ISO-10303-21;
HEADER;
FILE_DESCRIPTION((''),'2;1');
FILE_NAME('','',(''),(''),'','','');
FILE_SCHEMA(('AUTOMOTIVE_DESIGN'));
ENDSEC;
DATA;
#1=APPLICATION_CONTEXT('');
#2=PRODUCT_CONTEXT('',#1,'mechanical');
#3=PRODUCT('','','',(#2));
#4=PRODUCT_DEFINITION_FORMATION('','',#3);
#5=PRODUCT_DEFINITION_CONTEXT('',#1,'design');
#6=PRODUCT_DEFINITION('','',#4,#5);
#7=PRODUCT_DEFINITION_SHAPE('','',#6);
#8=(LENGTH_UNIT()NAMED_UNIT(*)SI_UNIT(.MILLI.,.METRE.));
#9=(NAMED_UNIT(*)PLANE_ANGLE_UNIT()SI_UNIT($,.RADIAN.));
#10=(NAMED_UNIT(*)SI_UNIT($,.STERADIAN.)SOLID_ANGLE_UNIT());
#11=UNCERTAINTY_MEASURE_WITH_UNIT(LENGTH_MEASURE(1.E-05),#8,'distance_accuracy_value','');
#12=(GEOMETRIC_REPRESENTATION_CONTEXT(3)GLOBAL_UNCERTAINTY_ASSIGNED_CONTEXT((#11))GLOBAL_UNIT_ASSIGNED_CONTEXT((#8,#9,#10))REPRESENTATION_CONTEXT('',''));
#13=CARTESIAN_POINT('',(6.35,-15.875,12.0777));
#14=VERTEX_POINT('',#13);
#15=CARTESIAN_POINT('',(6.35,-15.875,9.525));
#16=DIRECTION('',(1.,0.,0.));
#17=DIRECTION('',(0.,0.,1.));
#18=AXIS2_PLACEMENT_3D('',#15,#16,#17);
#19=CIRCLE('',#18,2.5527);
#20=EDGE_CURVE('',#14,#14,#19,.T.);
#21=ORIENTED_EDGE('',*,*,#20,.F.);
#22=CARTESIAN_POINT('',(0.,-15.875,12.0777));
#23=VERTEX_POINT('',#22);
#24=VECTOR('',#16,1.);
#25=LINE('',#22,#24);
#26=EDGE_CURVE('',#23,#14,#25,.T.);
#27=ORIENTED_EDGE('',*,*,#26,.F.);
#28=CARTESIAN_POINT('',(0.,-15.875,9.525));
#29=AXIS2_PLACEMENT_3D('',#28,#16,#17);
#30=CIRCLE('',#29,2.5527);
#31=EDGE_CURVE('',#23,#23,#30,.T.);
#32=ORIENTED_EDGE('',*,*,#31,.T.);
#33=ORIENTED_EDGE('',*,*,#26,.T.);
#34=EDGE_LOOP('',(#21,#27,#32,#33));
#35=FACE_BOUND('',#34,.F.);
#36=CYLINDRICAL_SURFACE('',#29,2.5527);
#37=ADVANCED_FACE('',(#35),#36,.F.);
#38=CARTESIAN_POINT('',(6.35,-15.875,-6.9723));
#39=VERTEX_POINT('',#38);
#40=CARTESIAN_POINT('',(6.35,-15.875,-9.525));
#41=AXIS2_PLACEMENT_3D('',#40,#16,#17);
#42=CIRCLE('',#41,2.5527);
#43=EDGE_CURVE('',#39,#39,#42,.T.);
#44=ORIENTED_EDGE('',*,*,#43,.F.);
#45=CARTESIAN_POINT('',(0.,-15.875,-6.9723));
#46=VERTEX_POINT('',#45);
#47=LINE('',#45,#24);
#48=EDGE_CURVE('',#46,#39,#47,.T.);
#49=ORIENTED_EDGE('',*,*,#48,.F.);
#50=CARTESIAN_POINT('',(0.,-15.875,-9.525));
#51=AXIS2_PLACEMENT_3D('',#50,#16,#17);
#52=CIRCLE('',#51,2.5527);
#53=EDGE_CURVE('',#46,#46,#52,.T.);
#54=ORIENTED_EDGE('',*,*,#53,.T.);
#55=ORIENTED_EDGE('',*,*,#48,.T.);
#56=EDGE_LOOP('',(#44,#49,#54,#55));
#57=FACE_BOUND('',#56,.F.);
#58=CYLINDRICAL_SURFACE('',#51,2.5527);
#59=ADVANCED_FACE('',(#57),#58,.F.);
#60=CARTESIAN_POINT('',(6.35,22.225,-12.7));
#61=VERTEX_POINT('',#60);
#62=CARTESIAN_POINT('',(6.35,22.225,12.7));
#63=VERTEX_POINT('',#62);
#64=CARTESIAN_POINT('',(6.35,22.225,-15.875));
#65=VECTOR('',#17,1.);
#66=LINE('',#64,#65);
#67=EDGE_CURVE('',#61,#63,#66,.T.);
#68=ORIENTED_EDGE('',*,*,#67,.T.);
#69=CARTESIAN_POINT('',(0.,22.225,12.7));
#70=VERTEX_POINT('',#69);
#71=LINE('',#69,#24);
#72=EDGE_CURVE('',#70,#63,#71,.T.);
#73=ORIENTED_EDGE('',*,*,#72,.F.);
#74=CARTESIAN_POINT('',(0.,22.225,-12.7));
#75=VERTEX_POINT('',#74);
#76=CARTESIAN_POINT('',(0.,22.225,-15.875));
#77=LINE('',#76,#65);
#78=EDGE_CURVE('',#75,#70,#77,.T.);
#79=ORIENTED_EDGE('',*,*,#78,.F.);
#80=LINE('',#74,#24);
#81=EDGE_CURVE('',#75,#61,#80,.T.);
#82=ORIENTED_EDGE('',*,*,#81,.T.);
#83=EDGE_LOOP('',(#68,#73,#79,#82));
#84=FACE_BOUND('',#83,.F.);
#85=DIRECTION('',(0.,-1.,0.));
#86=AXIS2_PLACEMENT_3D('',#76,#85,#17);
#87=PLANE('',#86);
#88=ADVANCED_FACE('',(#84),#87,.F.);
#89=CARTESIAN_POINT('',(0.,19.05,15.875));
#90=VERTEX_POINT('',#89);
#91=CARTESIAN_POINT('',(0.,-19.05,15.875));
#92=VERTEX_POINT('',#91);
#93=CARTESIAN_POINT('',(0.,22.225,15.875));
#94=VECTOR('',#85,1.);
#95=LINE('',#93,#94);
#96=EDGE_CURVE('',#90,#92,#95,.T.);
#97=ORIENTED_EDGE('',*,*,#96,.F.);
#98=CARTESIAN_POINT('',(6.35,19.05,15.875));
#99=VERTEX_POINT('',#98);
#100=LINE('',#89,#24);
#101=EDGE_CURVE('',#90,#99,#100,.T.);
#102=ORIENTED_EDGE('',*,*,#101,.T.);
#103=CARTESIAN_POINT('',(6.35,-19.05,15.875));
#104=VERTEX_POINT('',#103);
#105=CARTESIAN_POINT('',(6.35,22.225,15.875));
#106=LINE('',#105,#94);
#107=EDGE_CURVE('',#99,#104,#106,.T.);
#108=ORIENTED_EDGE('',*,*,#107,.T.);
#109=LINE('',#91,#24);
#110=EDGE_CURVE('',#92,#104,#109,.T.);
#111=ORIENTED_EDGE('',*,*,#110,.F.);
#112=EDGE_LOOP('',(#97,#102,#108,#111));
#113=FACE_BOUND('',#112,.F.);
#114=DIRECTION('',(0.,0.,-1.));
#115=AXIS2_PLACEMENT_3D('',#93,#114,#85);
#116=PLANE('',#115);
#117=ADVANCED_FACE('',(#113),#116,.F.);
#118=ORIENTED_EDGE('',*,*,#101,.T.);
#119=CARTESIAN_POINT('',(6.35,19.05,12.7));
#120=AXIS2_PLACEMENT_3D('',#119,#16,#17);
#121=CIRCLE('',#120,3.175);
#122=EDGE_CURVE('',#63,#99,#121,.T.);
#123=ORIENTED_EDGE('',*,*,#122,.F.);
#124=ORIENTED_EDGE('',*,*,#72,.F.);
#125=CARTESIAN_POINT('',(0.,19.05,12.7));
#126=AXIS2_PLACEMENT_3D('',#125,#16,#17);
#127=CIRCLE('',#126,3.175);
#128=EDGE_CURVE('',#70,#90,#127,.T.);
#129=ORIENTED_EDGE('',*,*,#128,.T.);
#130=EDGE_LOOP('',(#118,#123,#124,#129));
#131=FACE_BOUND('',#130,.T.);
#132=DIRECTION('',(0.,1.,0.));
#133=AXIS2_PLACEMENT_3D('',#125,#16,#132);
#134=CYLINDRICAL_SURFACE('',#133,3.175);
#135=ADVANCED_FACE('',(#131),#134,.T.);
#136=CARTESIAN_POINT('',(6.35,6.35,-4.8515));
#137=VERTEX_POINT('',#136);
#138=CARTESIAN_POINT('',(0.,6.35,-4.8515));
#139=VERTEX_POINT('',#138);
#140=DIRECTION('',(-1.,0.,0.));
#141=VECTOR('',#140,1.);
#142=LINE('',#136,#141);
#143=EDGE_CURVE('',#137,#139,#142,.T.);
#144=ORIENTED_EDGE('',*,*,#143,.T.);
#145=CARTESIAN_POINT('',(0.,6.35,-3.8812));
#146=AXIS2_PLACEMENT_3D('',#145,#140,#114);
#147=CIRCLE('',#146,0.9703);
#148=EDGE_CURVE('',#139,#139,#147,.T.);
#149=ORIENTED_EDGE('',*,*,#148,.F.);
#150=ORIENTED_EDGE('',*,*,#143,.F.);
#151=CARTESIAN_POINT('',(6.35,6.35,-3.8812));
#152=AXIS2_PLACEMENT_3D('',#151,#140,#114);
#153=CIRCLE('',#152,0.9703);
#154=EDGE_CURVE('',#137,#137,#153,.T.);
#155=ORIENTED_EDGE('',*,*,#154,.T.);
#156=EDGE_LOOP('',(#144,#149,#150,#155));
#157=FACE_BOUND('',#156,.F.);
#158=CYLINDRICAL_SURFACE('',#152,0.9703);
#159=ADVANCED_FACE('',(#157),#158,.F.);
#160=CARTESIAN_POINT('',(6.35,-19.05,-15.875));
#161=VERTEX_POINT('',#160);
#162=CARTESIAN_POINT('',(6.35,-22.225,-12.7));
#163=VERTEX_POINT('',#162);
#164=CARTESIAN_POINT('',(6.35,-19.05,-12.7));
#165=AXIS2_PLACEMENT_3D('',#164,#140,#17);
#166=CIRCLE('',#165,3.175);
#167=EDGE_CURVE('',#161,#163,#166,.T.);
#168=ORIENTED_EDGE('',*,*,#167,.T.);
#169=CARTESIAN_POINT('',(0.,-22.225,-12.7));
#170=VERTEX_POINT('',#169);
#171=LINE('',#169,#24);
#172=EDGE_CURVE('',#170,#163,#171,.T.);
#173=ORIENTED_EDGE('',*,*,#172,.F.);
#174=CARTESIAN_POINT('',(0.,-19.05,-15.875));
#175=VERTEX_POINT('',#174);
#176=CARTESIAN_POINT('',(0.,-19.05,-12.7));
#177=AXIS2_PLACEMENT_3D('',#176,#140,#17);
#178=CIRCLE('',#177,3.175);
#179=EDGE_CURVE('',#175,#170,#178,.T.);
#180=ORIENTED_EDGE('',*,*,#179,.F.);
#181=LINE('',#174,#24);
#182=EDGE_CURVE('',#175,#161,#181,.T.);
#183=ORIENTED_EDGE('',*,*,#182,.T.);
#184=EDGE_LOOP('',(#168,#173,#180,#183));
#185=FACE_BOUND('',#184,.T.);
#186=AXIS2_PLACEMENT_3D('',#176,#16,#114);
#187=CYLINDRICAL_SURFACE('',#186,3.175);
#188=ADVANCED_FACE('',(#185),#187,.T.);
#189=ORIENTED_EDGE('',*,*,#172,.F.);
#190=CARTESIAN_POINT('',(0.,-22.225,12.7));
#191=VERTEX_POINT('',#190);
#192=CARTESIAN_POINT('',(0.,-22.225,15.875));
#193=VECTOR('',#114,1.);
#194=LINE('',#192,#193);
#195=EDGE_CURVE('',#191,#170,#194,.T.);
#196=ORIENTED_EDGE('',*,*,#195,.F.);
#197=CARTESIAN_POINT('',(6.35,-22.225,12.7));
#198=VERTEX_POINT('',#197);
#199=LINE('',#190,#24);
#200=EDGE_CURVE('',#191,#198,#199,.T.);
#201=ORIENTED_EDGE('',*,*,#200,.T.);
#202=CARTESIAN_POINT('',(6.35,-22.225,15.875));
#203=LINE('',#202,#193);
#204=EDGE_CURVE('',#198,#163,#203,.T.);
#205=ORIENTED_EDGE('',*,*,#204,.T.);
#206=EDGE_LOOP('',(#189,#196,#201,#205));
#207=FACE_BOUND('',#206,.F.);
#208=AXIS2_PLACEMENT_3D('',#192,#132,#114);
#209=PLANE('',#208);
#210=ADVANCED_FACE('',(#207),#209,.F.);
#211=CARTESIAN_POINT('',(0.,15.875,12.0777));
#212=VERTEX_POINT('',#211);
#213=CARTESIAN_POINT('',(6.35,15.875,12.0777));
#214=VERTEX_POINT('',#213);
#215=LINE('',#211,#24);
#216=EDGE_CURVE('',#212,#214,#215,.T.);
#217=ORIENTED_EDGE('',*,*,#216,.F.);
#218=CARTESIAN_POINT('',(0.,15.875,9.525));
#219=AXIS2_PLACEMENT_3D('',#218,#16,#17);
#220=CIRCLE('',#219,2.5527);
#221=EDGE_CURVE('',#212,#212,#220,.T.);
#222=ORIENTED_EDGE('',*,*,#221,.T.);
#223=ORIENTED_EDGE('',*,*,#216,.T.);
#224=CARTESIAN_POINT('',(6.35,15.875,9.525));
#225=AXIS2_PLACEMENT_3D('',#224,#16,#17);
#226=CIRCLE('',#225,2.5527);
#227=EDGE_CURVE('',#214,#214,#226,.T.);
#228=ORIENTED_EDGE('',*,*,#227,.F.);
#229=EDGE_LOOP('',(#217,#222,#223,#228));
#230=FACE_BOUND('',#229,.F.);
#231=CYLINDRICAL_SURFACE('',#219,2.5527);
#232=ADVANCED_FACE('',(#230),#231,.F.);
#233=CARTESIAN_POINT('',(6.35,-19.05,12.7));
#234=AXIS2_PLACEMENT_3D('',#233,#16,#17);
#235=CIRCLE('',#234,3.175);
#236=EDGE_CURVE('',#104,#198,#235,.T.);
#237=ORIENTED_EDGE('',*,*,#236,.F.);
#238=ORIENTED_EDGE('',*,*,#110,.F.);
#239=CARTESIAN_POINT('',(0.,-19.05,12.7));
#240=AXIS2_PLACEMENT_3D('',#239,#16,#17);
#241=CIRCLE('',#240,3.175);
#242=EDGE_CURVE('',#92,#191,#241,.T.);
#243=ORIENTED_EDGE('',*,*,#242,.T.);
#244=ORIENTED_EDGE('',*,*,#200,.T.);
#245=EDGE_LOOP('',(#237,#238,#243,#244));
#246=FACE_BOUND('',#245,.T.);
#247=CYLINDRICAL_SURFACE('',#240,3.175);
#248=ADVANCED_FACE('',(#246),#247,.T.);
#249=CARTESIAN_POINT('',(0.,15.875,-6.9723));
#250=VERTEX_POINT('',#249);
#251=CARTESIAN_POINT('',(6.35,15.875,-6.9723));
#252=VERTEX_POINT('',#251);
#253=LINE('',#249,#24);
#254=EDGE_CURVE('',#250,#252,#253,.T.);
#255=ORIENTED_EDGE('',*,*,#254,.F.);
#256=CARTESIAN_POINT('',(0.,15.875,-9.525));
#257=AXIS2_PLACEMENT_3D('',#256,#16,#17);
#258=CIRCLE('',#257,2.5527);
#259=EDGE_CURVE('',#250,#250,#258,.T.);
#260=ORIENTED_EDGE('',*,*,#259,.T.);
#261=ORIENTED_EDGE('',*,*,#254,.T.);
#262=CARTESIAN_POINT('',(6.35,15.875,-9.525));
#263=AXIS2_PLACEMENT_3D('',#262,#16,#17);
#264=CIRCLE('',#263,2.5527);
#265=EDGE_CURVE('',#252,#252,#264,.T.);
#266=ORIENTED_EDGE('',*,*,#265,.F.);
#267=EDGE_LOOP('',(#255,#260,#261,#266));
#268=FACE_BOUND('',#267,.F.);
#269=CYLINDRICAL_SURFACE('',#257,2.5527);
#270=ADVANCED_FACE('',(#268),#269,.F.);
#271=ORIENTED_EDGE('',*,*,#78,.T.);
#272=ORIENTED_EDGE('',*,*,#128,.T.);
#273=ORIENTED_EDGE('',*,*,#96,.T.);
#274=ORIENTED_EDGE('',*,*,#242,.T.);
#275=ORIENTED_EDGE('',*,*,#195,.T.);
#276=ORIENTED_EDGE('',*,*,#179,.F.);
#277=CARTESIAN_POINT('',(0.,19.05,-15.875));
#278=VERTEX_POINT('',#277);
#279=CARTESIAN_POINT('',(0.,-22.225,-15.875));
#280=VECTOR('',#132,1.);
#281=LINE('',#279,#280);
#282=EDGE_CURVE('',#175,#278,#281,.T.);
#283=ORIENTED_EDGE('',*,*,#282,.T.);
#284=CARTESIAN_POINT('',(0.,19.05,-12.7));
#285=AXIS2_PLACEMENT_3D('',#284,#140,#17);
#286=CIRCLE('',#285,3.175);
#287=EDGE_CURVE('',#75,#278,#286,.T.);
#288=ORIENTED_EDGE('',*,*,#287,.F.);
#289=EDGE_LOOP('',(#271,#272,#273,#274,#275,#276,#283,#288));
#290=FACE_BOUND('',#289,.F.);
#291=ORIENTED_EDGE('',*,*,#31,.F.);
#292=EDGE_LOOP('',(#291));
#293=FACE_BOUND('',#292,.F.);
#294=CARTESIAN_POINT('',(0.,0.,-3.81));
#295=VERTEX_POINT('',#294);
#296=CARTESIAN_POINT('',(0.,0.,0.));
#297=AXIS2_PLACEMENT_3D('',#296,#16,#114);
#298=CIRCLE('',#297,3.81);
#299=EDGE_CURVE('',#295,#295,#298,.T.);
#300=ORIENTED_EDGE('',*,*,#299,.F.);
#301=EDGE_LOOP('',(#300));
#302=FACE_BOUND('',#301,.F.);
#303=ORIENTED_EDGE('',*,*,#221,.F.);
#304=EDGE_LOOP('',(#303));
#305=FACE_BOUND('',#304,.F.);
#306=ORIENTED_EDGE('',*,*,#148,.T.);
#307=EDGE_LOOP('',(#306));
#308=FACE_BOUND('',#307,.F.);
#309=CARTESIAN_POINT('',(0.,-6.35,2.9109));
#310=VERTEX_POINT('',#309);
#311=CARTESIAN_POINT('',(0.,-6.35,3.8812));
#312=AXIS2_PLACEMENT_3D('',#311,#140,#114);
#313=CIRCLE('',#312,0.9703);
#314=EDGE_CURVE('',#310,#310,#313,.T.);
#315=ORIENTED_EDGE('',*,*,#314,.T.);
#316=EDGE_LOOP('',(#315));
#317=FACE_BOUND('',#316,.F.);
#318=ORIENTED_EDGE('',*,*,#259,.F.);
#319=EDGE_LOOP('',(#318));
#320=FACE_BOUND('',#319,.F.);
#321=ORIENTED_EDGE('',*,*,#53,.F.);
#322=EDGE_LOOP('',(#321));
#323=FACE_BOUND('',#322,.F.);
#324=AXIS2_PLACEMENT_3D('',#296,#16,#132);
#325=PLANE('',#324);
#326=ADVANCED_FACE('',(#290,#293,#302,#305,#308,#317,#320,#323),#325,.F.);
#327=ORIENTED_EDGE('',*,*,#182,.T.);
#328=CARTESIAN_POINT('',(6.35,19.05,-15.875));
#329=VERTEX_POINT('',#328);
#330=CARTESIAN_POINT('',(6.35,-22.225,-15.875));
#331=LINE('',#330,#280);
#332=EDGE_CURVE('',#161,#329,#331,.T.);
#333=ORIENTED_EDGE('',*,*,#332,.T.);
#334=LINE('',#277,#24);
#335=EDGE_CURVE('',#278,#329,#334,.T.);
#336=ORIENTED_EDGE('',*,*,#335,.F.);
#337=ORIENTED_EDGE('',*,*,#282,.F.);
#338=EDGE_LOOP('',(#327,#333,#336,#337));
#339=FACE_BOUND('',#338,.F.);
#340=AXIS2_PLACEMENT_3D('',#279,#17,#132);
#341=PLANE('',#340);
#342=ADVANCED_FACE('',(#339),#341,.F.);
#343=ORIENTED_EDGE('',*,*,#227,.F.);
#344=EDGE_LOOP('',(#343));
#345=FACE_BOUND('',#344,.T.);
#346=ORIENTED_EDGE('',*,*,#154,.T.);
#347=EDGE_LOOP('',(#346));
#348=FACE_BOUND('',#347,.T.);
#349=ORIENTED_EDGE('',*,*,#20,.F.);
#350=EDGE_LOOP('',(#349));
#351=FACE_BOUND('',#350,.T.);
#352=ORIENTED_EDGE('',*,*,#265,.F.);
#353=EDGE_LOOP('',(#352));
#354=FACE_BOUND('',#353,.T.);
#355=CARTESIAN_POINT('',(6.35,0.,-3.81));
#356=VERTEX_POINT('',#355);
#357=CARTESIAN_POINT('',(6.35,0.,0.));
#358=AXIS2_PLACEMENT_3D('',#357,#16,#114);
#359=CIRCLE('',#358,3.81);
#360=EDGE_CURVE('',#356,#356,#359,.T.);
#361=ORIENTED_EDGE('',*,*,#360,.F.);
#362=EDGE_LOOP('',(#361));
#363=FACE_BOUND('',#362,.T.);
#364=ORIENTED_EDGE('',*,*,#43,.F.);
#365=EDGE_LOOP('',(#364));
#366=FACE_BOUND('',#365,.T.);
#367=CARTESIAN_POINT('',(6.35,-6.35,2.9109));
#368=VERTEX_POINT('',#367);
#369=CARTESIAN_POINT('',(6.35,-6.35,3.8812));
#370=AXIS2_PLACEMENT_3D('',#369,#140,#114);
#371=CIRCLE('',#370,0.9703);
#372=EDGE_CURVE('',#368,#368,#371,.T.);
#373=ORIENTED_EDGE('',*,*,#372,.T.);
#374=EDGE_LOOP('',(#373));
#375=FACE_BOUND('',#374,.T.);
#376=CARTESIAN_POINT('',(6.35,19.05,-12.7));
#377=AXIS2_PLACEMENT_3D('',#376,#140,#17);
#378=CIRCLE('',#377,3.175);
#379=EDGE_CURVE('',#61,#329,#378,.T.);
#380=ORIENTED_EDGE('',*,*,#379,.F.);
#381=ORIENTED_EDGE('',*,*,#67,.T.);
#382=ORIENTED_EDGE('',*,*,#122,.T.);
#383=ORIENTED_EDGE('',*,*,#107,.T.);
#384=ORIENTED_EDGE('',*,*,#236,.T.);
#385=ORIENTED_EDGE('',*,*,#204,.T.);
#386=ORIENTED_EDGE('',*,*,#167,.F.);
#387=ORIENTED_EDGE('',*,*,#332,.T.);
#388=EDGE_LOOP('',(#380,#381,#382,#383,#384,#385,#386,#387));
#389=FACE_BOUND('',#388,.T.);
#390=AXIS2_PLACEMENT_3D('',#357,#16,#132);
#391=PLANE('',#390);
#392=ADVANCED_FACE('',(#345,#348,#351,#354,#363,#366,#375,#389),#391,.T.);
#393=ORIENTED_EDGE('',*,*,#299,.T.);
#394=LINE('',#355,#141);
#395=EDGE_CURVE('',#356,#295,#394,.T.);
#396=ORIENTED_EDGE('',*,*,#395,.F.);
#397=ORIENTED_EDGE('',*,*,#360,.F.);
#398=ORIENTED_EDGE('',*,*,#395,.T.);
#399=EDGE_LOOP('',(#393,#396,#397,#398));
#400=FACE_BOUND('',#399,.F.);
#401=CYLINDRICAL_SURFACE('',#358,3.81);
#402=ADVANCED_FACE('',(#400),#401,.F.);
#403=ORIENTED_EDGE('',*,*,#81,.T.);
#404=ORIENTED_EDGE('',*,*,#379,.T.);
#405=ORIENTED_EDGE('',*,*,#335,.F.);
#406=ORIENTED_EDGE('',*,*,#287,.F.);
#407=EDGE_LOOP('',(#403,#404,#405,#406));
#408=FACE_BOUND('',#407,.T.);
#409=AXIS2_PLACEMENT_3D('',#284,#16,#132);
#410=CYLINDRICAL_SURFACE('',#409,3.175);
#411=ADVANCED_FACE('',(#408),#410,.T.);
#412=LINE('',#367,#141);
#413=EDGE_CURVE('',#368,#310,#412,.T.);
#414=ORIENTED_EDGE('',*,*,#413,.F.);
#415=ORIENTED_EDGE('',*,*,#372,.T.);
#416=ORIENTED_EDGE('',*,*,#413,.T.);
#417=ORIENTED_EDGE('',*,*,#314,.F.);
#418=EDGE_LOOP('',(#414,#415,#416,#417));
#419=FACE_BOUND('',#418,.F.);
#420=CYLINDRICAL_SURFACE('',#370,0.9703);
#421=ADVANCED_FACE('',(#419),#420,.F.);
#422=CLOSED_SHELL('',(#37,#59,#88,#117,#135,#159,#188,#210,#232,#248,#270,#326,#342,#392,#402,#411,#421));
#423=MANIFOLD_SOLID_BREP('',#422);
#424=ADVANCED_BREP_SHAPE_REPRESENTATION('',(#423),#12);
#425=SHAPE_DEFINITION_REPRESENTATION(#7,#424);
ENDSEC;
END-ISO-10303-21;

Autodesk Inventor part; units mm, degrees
ref_plane "YZ Plane" through (0, 0, 0) normal (1, 0, 0) x (0, 1, 0)
ref_plane "XZ Plane" through (0, 0, 0) normal (0, 1, 0) x (-1, 0, 0)
ref_plane "XY Plane" through (0, 0, 0) normal (0, 0, 1) x (1, 0, 0)
sketch "Sketch1" plane through (0, 0, 0) normal (1, 0, 0) x (0, 1, 0)
  line L0 (22.225, 15.875) -> (-22.225, 15.875)
  line L1 (-22.225, 15.875) -> (-22.225, -15.875)
  line L2 (-22.225, -15.875) -> (22.225, -15.875)
  line L3 (22.225, -15.875) -> (22.225, 15.875)
  line L4 (22.225, 15.875) -> (-22.225, -15.875) construction
  line L5 (-22.225, 15.875) -> (22.225, -15.875) construction
  line L6 (15.875, 9.525) -> (-15.875, 9.525) construction
  line L7 (-15.875, 9.525) -> (-15.875, -9.525) construction
  line L8 (-15.875, -9.525) -> (15.875, -9.525) construction
  line L9 (15.875, -9.525) -> (15.875, 9.525) construction
  line L10 (15.875, 9.525) -> (-15.875, -9.525) construction
  line L11 (-15.875, 9.525) -> (15.875, -9.525) construction
  point P0 (0, 0)
  dimension "d0" = 44.45
  dimension "d1" = 31.75
  dimension "d2" = 31.75
  dimension "d3" = 19.05
extrude "Extrusion1" add sketch "Sketch1" along normal blind 6.35
hole "Hole1" at (0, 15.875, 9.525) at (0, 15.875, -9.525) at (0, -15.875, 9.525) at (0, -15.875, -9.525) direction (1, 0, 0) diameter 5.1054 end through all clearance for "Flat Head Machine Screw (82)" size "#10" standard "Ansi Unified Screw Threads"
sketch "Sketch2" plane through (6.35, 0, 0) normal (1, 0, 0) x (0, 0, -1)
  line L0 (3.8812, 6.35) -> (-3.8812, -6.35) construction
  point P0 (0, 0)
  point P1 (0, 0)
  dimension "d13" = 14.8844
  dimension "d27" = 6.35
hole "Hole2" at (6.35, 6.35, -3.8812) at (6.35, -6.35, 3.8812) direction (-1, 0, 0) diameter 1.9406 end through all thread size "3-48 UNC" class "2B" standard "ANSI Unified Screw Threads"
sketch "Sketch3" plane through (6.35, 0, 0) normal (1, 0, 0) x (0, 0, -1)
  circle A0 centre (0, 0) radius 3.81
  dimension "d21" = 7.62
extrude "Extrusion2" cut sketch "Sketch3" against normal blind 6.35
fillet "Fillet1" radius 3.175 4 edges at (3.175, 22.225, 15.875) (3.175, 22.225, -15.875) (3.175, -22.225, -15.875) (3.175, -22.225, 15.875)
properties part number "AR-015" material "ABS Plastic"
